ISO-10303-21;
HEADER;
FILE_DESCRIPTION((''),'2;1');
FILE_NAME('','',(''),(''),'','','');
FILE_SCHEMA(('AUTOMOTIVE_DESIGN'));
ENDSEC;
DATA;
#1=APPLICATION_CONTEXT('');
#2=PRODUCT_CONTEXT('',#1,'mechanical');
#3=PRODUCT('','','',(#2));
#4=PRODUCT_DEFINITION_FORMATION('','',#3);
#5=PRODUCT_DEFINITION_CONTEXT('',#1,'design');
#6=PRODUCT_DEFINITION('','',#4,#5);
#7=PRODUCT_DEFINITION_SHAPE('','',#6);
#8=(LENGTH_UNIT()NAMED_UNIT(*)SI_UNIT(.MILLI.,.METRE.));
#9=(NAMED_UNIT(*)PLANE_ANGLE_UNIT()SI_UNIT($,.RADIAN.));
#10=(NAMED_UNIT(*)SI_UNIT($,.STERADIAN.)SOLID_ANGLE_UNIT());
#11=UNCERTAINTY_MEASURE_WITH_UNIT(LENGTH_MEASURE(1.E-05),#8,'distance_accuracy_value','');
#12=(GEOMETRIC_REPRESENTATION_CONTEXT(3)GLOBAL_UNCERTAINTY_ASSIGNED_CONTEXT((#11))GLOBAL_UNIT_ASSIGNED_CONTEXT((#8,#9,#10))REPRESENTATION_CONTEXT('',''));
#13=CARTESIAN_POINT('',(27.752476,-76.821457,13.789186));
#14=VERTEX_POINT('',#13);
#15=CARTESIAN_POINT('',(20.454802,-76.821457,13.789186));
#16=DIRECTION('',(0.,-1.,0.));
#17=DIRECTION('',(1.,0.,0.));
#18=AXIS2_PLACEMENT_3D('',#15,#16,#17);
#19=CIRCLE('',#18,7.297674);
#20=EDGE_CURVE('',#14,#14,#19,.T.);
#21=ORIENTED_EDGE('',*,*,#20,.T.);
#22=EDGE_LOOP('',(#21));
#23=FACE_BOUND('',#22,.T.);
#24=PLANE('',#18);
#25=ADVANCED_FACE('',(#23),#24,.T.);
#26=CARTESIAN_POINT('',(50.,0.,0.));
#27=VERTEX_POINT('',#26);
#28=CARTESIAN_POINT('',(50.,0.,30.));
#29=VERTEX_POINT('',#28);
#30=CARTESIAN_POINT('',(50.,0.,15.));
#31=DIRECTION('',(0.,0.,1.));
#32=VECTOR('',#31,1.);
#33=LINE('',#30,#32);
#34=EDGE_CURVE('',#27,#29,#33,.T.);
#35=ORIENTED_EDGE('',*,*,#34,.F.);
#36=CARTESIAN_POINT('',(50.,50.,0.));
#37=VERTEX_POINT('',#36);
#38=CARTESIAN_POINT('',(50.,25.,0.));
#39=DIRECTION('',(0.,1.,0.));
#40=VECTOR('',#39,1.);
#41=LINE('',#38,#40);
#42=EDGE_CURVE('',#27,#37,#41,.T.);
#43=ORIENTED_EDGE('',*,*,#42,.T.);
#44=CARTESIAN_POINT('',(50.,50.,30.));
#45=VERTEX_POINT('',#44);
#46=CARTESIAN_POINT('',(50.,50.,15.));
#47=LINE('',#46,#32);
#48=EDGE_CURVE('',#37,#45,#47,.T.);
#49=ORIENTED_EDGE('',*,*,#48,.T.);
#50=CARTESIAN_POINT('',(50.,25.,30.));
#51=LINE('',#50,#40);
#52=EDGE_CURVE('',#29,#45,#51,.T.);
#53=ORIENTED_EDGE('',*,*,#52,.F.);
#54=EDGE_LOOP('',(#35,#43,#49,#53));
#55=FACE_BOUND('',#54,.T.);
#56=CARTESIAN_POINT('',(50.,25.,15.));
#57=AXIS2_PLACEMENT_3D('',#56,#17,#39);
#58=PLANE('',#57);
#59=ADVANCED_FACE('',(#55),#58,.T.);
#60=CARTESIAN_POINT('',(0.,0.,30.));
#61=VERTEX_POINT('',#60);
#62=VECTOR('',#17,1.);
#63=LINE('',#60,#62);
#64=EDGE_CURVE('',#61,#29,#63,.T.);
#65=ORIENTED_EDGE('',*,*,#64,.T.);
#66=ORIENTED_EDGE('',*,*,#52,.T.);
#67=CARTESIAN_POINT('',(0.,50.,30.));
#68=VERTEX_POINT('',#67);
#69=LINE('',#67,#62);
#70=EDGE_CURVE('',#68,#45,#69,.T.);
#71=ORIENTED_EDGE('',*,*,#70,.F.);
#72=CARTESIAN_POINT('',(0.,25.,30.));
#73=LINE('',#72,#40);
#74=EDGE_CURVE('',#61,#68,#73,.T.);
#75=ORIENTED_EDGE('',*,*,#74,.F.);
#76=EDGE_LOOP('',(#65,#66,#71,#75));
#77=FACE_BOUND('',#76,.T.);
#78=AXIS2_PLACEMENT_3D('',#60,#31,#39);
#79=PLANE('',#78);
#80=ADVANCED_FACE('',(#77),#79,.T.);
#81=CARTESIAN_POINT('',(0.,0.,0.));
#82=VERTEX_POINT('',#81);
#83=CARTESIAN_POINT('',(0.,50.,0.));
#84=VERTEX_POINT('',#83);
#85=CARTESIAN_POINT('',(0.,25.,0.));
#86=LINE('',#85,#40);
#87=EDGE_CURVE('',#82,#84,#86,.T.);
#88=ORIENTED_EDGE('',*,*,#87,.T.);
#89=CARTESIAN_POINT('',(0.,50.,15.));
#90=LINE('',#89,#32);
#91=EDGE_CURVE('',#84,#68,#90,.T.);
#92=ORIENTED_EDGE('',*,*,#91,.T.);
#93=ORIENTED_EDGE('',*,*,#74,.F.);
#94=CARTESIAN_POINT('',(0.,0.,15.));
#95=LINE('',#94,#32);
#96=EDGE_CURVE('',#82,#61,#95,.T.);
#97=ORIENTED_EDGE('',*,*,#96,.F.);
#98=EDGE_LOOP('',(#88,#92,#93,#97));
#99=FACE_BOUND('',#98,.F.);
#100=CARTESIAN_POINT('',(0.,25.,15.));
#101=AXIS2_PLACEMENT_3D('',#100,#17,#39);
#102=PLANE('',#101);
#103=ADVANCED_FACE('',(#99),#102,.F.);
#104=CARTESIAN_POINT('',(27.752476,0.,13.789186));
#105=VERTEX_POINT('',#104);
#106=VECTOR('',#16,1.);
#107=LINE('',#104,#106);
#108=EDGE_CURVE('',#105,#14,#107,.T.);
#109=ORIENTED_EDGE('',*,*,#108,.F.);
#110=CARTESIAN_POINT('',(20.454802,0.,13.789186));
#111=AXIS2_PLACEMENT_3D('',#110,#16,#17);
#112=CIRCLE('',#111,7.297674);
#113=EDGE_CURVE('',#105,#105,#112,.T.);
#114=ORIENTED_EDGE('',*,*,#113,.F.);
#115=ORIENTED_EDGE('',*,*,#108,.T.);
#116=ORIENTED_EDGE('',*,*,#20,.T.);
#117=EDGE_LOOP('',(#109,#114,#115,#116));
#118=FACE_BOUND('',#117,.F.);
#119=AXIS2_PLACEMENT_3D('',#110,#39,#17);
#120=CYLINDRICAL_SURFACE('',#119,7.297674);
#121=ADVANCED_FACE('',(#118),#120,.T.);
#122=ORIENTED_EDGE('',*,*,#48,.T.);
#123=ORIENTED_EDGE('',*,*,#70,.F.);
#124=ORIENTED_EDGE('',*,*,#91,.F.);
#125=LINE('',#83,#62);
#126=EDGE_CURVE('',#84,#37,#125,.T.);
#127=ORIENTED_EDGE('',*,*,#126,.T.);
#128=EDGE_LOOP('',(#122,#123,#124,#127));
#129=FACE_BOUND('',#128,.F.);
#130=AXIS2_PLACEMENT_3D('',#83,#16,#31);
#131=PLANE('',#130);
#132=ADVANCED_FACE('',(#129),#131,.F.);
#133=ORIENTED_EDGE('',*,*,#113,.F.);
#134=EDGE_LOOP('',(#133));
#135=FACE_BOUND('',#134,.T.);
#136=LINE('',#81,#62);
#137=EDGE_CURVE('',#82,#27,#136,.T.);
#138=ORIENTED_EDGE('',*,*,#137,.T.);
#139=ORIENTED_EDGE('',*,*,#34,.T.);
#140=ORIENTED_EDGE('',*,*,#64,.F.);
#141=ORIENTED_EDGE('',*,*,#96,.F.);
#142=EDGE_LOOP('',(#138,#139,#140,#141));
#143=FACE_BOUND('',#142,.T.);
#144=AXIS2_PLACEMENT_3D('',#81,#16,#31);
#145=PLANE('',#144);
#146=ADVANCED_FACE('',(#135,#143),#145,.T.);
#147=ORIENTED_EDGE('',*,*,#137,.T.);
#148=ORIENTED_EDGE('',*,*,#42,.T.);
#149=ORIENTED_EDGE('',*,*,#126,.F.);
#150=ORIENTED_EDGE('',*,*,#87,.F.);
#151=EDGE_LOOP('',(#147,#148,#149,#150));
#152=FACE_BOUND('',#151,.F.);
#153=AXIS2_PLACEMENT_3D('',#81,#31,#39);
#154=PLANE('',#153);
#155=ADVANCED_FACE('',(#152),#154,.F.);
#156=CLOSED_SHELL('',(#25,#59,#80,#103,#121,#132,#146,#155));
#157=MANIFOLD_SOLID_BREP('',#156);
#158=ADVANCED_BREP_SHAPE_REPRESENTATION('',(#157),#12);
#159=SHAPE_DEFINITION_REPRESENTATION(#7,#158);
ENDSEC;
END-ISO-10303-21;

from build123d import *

# Parameters (mm, degrees)
F1_W     = 50
F1_H     = 30
F2_DEPTH = 50
F3_R     = 7.2976744804
F4_DEPTH = 76.8214575
F5_DEPTH = 116.5


# Not quite as in the source:
# - an extrude ends at something that could not be found from the text; its depth is read off the source's solid


with BuildPart() as f2:
    # F1 (on Right) → F2 (new body)
    with BuildSketch(Plane.YZ):
        with Locations((25, 15)):
            Rectangle(F1_W, F1_H)
    extrude(amount=F2_DEPTH)

    # F3 (on face) → F4 (join, through all)
    with BuildSketch(Plane.XZ):
        with Locations((20.4548016191, 13.7891862541)):
            Circle(F3_R)
    extrude(amount=F4_DEPTH)

    # F5 (add): a face of the model
    f5_faces = [f2.faces().sort_by_distance(p)[0] for p in [
        (20.4548016191, -76.8214575, 13.7891862541),
    ]]
    extrude(f5_faces, amount=-F5_DEPTH)


solid = f2.part
